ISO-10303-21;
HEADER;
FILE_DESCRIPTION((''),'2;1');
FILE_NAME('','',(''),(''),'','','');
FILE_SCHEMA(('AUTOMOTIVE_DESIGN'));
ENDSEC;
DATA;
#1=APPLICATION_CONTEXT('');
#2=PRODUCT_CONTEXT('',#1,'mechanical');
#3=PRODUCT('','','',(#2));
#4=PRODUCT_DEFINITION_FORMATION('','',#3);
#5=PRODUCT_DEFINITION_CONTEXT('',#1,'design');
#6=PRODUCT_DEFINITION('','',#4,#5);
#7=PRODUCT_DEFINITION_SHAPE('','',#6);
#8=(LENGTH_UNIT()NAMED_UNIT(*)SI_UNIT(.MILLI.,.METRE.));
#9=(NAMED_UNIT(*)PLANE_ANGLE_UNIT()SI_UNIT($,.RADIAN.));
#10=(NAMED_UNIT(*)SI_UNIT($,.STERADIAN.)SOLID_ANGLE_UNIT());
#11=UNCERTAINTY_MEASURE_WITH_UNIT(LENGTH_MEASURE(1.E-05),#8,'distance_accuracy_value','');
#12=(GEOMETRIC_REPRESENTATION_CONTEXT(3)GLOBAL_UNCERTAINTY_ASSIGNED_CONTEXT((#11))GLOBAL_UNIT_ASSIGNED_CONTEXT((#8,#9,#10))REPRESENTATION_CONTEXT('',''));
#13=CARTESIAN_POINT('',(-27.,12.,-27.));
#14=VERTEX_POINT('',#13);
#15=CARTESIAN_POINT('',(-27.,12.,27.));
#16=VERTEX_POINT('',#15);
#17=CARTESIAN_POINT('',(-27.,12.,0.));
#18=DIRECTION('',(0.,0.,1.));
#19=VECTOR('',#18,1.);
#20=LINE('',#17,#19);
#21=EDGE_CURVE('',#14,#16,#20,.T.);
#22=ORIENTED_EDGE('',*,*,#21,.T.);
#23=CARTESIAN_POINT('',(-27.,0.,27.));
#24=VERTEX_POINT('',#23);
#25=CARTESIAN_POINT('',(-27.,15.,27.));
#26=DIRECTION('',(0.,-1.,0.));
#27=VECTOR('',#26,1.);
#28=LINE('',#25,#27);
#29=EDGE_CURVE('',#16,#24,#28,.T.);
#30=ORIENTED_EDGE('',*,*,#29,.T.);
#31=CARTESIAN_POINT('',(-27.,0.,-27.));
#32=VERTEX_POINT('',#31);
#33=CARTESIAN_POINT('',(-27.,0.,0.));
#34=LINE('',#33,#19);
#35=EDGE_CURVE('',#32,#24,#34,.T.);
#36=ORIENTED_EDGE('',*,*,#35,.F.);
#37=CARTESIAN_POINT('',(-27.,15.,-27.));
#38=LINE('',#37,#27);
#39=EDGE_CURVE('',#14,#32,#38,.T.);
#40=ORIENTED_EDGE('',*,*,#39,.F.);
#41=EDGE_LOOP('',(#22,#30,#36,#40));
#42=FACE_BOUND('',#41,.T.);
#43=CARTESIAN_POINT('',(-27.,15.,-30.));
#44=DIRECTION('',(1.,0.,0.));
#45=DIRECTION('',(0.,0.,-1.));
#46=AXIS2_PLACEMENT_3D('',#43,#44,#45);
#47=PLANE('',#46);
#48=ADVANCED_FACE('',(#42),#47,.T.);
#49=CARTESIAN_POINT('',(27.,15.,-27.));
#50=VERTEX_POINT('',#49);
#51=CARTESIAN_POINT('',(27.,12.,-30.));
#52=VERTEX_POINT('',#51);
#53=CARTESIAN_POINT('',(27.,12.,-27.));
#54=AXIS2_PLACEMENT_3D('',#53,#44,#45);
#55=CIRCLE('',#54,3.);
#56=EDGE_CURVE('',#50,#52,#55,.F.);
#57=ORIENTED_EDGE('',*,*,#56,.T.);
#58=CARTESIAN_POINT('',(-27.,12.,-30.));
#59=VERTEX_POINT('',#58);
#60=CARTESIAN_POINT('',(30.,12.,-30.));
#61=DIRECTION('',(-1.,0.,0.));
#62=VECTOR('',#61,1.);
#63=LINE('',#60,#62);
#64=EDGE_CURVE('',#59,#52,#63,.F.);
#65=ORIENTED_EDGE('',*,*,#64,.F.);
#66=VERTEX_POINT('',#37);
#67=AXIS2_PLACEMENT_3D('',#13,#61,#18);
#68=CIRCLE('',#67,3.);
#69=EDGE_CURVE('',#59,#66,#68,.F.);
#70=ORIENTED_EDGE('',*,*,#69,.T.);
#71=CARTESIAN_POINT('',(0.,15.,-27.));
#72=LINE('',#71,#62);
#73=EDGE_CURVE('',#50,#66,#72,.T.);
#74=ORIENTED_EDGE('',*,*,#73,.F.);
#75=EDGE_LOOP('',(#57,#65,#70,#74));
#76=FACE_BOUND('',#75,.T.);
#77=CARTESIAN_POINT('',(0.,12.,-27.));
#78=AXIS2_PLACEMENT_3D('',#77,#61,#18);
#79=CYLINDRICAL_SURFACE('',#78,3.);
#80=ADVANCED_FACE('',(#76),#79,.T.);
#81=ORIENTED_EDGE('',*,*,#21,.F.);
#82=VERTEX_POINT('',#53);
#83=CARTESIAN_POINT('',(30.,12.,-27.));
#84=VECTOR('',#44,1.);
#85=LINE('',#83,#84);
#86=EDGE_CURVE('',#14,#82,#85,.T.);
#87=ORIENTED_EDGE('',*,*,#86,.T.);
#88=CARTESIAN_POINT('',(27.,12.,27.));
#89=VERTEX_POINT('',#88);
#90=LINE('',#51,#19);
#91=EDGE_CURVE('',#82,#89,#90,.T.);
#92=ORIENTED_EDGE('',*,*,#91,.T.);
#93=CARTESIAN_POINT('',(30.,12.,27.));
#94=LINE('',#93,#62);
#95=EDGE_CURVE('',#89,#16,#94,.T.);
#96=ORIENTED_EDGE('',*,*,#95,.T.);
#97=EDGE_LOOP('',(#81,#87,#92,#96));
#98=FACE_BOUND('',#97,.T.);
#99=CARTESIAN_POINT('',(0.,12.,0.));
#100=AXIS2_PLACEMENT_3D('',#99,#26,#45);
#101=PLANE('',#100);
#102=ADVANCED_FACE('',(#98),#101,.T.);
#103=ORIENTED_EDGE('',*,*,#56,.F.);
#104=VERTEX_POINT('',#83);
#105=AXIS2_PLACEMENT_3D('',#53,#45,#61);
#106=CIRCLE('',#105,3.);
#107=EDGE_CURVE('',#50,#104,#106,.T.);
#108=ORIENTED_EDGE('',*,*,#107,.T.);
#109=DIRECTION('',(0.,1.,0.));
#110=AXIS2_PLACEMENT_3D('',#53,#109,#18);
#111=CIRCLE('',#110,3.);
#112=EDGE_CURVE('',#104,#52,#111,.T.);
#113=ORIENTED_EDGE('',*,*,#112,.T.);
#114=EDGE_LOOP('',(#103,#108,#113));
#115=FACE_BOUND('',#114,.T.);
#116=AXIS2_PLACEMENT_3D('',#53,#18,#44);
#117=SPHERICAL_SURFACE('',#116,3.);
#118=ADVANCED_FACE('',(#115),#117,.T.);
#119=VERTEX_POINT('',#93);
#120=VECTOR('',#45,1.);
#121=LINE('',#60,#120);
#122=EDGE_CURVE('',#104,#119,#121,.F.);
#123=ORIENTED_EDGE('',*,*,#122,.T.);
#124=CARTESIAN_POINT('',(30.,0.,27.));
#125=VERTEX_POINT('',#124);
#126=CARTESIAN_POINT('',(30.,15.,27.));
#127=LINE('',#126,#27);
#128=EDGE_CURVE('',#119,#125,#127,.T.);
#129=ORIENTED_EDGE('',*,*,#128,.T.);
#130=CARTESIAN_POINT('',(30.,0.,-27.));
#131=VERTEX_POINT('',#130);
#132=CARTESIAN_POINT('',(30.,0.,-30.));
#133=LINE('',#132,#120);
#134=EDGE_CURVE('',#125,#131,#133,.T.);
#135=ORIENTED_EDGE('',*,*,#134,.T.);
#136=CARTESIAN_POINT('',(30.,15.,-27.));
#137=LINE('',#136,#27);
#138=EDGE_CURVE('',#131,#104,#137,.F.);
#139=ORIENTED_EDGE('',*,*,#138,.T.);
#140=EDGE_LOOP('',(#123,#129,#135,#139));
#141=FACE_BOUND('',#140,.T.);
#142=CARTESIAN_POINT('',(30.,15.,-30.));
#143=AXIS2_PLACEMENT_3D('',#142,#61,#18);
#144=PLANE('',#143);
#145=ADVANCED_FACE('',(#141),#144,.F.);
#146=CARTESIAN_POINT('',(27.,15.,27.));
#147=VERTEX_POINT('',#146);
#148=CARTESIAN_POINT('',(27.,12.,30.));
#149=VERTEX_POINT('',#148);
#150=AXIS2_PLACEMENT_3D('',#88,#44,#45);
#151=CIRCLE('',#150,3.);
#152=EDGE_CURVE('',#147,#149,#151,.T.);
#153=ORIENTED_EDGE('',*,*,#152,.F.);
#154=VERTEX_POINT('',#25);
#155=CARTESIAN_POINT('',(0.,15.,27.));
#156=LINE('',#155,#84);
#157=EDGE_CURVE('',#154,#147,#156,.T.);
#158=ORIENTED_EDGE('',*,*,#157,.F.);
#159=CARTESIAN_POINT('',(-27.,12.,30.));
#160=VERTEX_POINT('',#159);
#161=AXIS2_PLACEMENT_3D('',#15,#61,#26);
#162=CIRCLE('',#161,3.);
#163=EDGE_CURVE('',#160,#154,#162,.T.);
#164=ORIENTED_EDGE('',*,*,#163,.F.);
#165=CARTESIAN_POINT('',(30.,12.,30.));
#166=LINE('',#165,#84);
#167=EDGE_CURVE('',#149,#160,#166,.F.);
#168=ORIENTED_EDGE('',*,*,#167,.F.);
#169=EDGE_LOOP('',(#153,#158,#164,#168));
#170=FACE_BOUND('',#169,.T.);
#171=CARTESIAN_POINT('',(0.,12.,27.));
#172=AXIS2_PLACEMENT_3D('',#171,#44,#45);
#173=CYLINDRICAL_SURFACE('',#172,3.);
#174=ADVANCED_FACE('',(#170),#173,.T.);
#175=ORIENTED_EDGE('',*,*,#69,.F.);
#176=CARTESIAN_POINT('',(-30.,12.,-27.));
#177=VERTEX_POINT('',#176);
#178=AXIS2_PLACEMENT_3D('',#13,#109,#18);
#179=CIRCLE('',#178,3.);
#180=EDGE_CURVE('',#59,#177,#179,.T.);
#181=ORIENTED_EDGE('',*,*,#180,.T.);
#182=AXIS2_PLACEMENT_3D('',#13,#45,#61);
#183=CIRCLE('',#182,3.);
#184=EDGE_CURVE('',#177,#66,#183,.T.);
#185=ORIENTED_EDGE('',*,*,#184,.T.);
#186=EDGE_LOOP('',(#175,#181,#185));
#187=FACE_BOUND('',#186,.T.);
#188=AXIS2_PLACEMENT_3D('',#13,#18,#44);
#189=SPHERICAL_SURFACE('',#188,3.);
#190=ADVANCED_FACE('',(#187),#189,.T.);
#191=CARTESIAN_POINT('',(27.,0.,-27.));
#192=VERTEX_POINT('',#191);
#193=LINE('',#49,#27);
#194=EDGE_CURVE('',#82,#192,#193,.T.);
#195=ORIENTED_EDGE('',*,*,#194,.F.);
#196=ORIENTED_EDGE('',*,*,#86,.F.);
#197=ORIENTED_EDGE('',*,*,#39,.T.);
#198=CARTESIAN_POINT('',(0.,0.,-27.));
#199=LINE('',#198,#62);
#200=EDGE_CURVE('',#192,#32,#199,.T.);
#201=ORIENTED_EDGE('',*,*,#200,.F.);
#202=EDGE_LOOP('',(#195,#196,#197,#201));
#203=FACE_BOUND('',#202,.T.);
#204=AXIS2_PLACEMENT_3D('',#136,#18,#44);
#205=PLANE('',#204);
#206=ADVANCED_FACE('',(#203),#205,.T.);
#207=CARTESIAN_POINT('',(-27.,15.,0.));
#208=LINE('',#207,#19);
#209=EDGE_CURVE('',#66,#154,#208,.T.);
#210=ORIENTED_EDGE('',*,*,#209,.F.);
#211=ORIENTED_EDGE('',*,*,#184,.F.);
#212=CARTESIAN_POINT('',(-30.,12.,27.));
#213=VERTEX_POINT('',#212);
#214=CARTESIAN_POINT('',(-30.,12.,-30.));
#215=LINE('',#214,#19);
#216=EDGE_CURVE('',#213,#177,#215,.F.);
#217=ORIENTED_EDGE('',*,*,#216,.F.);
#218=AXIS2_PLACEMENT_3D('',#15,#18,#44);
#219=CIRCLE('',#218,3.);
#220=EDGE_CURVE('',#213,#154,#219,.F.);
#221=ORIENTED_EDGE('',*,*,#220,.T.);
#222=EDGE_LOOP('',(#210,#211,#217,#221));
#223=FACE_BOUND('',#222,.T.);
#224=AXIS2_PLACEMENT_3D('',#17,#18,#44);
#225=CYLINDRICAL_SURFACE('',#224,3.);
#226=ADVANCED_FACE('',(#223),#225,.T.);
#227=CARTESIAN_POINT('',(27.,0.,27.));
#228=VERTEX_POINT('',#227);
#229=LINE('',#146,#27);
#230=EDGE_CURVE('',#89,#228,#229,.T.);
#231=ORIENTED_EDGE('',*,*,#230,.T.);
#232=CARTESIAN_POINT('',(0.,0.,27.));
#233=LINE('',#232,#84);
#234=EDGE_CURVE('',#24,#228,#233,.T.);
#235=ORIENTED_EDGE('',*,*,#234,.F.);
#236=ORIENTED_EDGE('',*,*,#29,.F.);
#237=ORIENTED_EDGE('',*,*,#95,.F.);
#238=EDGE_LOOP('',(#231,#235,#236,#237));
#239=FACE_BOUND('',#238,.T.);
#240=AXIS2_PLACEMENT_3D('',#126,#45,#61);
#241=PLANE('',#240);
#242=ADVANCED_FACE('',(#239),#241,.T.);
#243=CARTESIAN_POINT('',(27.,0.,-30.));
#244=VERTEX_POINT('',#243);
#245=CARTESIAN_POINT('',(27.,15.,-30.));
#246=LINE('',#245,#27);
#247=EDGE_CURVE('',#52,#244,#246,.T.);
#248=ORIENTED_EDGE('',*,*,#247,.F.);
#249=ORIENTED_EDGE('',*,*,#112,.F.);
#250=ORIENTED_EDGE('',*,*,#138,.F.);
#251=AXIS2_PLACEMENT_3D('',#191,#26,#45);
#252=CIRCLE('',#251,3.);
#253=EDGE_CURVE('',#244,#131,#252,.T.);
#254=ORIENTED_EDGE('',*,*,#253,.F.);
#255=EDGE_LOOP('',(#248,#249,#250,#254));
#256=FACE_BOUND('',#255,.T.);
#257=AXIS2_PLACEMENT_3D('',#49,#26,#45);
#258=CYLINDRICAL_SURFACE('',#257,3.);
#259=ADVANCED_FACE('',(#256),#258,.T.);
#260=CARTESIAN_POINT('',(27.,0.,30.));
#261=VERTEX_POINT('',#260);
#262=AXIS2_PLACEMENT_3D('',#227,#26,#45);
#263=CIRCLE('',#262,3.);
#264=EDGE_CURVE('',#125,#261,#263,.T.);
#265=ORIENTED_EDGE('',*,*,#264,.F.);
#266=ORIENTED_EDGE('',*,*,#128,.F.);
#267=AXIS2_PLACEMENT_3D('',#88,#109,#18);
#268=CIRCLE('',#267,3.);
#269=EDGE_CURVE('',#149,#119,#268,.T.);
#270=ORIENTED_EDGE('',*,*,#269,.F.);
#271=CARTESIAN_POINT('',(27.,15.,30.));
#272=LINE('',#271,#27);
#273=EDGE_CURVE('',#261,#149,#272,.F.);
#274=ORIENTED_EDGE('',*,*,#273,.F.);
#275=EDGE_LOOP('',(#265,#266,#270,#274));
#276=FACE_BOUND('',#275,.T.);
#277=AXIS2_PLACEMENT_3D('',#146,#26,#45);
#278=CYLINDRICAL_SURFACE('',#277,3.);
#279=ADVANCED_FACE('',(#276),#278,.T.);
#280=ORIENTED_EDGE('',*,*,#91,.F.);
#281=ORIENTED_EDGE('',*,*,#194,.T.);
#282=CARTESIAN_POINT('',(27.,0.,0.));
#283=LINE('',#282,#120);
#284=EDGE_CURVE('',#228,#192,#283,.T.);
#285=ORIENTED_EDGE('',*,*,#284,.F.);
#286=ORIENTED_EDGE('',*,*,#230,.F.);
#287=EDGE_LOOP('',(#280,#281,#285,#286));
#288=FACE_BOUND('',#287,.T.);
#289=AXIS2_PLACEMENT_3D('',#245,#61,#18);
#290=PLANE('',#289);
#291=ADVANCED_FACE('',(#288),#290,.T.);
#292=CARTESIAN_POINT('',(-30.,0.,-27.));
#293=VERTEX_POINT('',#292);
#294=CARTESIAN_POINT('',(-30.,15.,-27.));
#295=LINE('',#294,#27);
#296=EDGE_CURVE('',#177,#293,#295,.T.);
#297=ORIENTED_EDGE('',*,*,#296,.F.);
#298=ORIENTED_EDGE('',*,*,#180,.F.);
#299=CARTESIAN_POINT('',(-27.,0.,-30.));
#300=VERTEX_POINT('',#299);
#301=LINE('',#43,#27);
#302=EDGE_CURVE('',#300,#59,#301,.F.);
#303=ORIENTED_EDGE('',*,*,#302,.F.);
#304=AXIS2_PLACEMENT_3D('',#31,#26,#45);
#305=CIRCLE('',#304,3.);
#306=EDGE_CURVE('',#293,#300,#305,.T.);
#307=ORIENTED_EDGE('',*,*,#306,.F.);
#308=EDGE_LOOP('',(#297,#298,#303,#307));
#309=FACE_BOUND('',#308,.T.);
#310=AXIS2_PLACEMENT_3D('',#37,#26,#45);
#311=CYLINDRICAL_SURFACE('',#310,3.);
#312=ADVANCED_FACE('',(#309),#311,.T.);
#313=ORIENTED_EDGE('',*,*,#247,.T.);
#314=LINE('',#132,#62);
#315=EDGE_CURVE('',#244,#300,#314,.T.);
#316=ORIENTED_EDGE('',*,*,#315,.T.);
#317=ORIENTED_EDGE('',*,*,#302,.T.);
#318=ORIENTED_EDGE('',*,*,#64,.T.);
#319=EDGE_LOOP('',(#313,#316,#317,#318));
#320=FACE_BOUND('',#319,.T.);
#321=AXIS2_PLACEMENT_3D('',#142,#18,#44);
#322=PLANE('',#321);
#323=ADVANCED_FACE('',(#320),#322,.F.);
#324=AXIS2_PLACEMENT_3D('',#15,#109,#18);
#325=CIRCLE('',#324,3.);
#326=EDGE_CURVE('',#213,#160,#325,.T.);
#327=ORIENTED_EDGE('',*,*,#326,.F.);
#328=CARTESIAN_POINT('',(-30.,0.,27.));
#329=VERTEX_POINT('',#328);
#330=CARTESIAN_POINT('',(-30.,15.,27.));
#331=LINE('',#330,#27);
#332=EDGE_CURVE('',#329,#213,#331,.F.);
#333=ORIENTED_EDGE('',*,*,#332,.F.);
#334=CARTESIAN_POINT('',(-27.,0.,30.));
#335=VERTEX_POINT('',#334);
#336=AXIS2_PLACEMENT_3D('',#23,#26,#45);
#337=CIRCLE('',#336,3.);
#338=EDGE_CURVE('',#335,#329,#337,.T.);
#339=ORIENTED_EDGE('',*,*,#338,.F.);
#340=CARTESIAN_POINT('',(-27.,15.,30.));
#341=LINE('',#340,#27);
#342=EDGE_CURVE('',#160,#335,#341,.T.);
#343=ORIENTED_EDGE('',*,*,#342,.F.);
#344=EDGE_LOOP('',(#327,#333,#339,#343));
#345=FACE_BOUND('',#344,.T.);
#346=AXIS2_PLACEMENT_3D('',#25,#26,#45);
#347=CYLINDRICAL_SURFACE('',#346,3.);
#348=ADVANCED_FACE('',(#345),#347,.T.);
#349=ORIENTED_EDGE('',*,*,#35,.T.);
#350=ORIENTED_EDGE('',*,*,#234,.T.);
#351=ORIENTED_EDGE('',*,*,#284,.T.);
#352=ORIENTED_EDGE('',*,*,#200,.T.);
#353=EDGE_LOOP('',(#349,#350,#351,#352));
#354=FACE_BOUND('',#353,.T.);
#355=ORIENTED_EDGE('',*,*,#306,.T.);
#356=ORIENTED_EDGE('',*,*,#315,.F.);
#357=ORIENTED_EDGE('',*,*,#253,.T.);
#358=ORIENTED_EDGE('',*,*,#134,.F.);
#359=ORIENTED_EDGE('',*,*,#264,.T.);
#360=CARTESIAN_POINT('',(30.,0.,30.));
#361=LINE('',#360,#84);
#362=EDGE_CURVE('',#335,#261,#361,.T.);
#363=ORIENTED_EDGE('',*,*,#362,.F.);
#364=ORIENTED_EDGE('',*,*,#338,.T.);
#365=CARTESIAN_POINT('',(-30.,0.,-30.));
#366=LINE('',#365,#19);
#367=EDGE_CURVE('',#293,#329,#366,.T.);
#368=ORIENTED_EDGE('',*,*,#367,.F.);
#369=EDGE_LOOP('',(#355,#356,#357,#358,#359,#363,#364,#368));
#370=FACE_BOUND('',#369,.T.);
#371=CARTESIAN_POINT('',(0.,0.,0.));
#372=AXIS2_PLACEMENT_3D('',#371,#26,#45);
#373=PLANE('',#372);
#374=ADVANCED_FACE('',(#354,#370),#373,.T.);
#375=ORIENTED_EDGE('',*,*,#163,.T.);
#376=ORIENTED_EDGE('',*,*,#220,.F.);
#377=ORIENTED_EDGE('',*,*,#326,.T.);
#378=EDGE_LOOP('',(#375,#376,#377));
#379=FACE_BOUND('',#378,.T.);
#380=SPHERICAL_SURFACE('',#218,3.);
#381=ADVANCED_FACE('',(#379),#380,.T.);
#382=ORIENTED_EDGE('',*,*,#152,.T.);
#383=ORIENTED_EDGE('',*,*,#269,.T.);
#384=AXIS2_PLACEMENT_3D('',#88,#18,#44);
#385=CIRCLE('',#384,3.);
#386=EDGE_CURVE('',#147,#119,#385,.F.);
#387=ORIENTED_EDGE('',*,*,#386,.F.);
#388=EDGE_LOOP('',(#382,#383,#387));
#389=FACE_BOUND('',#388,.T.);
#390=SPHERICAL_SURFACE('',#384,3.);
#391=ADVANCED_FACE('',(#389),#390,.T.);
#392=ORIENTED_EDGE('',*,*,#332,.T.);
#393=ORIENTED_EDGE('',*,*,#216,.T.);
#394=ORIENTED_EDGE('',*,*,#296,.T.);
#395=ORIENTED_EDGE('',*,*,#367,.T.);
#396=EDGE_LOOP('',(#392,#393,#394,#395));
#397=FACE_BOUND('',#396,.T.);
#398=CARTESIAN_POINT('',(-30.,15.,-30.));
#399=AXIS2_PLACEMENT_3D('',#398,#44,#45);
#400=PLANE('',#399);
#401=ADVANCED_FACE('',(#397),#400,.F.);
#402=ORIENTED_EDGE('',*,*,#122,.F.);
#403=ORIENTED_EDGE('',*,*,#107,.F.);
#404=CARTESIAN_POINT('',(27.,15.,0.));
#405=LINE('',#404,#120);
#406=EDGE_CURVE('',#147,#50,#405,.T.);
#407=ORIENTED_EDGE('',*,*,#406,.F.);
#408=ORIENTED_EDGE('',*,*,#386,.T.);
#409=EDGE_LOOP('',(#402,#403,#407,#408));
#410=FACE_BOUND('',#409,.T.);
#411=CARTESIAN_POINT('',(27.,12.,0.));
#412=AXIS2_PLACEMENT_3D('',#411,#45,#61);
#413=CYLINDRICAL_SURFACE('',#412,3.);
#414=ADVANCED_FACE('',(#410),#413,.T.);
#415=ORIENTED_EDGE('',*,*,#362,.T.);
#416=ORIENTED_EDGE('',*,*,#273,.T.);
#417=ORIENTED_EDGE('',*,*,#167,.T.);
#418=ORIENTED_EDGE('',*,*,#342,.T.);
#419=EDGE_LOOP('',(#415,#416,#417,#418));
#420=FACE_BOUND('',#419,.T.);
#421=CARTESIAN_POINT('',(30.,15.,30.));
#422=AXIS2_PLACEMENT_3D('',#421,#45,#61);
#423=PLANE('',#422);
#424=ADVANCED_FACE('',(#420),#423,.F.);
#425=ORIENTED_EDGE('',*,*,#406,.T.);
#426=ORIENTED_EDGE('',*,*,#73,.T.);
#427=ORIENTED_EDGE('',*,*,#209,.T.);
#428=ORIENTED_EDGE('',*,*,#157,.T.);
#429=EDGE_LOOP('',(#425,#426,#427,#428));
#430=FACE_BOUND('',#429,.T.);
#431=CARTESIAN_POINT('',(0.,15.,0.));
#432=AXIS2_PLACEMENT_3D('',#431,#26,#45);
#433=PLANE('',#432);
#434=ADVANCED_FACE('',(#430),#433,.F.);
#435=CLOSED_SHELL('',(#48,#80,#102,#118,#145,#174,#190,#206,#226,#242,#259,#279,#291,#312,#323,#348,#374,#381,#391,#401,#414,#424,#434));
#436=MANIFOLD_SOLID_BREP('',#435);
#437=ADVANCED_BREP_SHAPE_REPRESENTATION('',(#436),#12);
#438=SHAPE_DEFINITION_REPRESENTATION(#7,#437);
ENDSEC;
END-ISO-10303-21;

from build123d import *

# Parameters (mm, degrees)
SKETCH1_W           = 60
SKETCH1_H           = 60
BOSS_EXTRUDE1_DEPTH = 15
FILLET1_R           = 3
SHELL1_START        = -27
SHELL1_OUTLINE_W    = 12
SHELL1_OUTLINE_H    = 54
SHELL1_DEPTH        = 54


# Read off the part's stored shape, not the designer's step: Shell1
with BuildPart() as part:
    # Sketch1 → Boss-Extrude1 (new body)
    with BuildSketch(Plane(origin=(0, 0, 0), x_dir=(1, 0, 0), z_dir=(0, 1, 0))):
        Rectangle(SKETCH1_W, SKETCH1_H)
    extrude(amount=BOSS_EXTRUDE1_DEPTH)

    # Fillet1
    fillet1_edges = [part.edges().sort_by_distance(p)[0] for p in [
        (30, 15, 0),
        (0, 15, -30),
        (-30, 15, 0),
        (0, 15, 30),
        (-30, 7.5, -30),
        (30, 7.5, -30),
        (30, 7.5, 30),
        (-30, 7.5, 30),
    ]]
    fillet(fillet1_edges, radius=FILLET1_R)

    # Shell1 outline → Shell1 (cut)
    with BuildSketch(Plane.YZ.offset(SHELL1_START)):
        with Locations((6, 0)):
            Rectangle(SHELL1_OUTLINE_W, SHELL1_OUTLINE_H)
    extrude(amount=SHELL1_DEPTH, mode=Mode.SUBTRACT)


solid = part.part
